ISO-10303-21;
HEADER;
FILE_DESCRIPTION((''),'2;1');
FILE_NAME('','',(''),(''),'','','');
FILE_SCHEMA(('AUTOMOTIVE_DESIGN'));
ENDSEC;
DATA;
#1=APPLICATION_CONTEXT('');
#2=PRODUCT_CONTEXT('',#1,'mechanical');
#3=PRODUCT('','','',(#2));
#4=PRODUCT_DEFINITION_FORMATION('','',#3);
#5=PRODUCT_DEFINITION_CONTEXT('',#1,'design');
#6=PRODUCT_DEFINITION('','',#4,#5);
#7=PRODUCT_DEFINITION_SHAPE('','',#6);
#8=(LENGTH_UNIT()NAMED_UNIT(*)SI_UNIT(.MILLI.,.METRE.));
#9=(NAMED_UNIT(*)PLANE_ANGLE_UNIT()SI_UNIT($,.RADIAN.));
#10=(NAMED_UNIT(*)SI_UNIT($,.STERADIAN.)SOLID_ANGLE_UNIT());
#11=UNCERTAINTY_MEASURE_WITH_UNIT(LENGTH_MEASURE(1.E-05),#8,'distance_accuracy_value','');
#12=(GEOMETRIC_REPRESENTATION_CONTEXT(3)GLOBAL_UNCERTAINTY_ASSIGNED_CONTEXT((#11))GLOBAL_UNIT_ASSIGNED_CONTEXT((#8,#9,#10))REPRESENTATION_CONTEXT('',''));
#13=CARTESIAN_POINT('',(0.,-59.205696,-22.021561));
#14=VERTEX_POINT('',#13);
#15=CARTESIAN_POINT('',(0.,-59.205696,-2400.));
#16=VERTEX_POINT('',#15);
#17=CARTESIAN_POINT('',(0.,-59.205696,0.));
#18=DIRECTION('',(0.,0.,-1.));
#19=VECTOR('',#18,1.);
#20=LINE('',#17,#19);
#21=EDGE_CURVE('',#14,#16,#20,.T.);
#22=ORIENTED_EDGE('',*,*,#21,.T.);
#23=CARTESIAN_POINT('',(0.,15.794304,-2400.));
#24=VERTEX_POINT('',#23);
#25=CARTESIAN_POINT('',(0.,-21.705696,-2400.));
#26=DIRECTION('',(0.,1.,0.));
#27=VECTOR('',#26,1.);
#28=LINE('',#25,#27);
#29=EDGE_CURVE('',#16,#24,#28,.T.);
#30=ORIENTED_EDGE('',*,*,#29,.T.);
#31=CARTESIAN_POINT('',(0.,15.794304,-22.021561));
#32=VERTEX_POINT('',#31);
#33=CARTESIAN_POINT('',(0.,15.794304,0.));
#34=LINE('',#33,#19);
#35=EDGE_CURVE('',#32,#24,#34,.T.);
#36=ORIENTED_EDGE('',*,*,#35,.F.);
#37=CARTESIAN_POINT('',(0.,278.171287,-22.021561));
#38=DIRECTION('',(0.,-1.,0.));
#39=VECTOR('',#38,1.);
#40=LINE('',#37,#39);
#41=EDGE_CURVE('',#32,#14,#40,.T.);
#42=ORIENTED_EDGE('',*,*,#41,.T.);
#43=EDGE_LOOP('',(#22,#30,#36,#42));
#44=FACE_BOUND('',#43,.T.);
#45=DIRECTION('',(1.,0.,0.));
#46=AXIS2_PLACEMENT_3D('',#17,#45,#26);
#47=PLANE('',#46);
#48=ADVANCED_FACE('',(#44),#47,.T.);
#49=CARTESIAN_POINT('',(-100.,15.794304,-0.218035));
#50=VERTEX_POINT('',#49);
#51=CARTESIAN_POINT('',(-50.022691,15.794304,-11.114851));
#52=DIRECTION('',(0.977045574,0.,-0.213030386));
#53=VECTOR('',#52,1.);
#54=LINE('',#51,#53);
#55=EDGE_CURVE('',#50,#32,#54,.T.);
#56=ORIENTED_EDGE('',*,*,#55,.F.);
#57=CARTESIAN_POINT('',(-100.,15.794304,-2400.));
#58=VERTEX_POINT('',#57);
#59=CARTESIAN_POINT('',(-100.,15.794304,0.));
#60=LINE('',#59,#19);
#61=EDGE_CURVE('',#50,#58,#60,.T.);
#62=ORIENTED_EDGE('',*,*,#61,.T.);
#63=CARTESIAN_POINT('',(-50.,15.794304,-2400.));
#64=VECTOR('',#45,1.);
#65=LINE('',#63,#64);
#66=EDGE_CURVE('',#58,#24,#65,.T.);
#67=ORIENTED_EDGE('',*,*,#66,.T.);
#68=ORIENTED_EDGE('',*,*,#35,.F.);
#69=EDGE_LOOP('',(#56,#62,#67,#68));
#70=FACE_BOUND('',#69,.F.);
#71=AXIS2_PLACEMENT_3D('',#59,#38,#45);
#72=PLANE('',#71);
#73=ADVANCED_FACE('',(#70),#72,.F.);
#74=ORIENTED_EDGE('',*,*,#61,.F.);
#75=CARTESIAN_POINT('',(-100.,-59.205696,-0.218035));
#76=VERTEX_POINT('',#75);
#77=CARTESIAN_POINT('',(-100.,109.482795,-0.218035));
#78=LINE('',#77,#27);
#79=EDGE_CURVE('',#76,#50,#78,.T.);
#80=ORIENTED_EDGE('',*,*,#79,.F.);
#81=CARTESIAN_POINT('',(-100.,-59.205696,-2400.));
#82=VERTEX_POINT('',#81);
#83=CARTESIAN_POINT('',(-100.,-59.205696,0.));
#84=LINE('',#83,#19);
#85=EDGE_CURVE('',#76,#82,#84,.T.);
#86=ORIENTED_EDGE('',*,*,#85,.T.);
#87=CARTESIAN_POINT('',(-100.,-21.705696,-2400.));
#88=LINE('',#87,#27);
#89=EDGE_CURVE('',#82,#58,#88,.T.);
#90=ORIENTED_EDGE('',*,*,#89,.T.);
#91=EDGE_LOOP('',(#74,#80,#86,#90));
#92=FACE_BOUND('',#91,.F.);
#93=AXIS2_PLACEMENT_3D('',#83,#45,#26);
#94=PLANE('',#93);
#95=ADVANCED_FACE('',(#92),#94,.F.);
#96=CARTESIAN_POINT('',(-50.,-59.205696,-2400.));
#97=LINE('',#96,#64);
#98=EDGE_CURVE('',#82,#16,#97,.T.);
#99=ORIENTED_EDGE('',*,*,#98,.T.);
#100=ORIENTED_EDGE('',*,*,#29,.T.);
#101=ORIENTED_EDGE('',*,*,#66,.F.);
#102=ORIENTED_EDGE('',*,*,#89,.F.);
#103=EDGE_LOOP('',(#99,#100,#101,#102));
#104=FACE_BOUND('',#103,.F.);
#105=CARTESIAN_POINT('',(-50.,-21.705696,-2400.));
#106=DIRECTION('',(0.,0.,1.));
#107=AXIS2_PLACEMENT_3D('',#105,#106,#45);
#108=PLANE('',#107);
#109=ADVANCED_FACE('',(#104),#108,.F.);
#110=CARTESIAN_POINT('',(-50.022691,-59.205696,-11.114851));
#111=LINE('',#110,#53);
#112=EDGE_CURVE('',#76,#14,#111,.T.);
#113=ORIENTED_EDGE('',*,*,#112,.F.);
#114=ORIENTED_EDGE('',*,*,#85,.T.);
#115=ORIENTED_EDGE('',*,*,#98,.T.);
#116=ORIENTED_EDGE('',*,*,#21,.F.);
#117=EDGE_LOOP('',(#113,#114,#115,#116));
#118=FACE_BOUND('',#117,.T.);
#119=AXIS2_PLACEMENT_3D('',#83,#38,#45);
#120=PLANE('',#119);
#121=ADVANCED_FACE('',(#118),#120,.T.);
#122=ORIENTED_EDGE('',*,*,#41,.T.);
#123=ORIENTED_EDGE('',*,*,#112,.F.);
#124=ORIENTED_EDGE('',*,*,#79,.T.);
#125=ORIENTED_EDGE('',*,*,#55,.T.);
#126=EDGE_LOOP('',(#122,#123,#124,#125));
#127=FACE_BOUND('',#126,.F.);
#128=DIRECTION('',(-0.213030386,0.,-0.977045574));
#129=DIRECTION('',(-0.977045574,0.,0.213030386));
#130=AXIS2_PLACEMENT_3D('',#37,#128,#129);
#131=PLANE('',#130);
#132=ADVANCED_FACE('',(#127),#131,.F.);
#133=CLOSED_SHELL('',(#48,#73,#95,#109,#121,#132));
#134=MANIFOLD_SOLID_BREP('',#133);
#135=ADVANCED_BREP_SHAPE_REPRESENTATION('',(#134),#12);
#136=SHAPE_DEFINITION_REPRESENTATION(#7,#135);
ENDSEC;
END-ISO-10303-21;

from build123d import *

# Parameters (mm, degrees)
F0_W        = 100
F0_H        = 75
F1_DEPTH    = 2400
F2_T1_DEPTH = 599.7539650252


# Not quite as in the source:
# - a fillet or chamfer that OpenCascade refuses, or shapes differently, is made with other operations: its cross-section is extruded or revolved along the edge and cut away or added


with BuildPart() as f1:
    # F0 (on Top) → F1 (new body)
    with BuildSketch(Plane.XY):
        with Locations((-50, -21.705695812)):
            Rectangle(F0_W, F0_H)
    extrude(amount=-F1_DEPTH)

    # F2: chamfer of 101 x 22.0215613035 on 1 edges, made by hand

    # F2_s2 → F2_t1 (cut)
    with BuildSketch(Plane.XZ.offset(-278.1712867006)):
        Polygon((0, -22.0215613035), (-101, 0), (0, 0), align=None)
    extrude(amount=F2_T1_DEPTH, mode=Mode.SUBTRACT)


solid = f1.part
